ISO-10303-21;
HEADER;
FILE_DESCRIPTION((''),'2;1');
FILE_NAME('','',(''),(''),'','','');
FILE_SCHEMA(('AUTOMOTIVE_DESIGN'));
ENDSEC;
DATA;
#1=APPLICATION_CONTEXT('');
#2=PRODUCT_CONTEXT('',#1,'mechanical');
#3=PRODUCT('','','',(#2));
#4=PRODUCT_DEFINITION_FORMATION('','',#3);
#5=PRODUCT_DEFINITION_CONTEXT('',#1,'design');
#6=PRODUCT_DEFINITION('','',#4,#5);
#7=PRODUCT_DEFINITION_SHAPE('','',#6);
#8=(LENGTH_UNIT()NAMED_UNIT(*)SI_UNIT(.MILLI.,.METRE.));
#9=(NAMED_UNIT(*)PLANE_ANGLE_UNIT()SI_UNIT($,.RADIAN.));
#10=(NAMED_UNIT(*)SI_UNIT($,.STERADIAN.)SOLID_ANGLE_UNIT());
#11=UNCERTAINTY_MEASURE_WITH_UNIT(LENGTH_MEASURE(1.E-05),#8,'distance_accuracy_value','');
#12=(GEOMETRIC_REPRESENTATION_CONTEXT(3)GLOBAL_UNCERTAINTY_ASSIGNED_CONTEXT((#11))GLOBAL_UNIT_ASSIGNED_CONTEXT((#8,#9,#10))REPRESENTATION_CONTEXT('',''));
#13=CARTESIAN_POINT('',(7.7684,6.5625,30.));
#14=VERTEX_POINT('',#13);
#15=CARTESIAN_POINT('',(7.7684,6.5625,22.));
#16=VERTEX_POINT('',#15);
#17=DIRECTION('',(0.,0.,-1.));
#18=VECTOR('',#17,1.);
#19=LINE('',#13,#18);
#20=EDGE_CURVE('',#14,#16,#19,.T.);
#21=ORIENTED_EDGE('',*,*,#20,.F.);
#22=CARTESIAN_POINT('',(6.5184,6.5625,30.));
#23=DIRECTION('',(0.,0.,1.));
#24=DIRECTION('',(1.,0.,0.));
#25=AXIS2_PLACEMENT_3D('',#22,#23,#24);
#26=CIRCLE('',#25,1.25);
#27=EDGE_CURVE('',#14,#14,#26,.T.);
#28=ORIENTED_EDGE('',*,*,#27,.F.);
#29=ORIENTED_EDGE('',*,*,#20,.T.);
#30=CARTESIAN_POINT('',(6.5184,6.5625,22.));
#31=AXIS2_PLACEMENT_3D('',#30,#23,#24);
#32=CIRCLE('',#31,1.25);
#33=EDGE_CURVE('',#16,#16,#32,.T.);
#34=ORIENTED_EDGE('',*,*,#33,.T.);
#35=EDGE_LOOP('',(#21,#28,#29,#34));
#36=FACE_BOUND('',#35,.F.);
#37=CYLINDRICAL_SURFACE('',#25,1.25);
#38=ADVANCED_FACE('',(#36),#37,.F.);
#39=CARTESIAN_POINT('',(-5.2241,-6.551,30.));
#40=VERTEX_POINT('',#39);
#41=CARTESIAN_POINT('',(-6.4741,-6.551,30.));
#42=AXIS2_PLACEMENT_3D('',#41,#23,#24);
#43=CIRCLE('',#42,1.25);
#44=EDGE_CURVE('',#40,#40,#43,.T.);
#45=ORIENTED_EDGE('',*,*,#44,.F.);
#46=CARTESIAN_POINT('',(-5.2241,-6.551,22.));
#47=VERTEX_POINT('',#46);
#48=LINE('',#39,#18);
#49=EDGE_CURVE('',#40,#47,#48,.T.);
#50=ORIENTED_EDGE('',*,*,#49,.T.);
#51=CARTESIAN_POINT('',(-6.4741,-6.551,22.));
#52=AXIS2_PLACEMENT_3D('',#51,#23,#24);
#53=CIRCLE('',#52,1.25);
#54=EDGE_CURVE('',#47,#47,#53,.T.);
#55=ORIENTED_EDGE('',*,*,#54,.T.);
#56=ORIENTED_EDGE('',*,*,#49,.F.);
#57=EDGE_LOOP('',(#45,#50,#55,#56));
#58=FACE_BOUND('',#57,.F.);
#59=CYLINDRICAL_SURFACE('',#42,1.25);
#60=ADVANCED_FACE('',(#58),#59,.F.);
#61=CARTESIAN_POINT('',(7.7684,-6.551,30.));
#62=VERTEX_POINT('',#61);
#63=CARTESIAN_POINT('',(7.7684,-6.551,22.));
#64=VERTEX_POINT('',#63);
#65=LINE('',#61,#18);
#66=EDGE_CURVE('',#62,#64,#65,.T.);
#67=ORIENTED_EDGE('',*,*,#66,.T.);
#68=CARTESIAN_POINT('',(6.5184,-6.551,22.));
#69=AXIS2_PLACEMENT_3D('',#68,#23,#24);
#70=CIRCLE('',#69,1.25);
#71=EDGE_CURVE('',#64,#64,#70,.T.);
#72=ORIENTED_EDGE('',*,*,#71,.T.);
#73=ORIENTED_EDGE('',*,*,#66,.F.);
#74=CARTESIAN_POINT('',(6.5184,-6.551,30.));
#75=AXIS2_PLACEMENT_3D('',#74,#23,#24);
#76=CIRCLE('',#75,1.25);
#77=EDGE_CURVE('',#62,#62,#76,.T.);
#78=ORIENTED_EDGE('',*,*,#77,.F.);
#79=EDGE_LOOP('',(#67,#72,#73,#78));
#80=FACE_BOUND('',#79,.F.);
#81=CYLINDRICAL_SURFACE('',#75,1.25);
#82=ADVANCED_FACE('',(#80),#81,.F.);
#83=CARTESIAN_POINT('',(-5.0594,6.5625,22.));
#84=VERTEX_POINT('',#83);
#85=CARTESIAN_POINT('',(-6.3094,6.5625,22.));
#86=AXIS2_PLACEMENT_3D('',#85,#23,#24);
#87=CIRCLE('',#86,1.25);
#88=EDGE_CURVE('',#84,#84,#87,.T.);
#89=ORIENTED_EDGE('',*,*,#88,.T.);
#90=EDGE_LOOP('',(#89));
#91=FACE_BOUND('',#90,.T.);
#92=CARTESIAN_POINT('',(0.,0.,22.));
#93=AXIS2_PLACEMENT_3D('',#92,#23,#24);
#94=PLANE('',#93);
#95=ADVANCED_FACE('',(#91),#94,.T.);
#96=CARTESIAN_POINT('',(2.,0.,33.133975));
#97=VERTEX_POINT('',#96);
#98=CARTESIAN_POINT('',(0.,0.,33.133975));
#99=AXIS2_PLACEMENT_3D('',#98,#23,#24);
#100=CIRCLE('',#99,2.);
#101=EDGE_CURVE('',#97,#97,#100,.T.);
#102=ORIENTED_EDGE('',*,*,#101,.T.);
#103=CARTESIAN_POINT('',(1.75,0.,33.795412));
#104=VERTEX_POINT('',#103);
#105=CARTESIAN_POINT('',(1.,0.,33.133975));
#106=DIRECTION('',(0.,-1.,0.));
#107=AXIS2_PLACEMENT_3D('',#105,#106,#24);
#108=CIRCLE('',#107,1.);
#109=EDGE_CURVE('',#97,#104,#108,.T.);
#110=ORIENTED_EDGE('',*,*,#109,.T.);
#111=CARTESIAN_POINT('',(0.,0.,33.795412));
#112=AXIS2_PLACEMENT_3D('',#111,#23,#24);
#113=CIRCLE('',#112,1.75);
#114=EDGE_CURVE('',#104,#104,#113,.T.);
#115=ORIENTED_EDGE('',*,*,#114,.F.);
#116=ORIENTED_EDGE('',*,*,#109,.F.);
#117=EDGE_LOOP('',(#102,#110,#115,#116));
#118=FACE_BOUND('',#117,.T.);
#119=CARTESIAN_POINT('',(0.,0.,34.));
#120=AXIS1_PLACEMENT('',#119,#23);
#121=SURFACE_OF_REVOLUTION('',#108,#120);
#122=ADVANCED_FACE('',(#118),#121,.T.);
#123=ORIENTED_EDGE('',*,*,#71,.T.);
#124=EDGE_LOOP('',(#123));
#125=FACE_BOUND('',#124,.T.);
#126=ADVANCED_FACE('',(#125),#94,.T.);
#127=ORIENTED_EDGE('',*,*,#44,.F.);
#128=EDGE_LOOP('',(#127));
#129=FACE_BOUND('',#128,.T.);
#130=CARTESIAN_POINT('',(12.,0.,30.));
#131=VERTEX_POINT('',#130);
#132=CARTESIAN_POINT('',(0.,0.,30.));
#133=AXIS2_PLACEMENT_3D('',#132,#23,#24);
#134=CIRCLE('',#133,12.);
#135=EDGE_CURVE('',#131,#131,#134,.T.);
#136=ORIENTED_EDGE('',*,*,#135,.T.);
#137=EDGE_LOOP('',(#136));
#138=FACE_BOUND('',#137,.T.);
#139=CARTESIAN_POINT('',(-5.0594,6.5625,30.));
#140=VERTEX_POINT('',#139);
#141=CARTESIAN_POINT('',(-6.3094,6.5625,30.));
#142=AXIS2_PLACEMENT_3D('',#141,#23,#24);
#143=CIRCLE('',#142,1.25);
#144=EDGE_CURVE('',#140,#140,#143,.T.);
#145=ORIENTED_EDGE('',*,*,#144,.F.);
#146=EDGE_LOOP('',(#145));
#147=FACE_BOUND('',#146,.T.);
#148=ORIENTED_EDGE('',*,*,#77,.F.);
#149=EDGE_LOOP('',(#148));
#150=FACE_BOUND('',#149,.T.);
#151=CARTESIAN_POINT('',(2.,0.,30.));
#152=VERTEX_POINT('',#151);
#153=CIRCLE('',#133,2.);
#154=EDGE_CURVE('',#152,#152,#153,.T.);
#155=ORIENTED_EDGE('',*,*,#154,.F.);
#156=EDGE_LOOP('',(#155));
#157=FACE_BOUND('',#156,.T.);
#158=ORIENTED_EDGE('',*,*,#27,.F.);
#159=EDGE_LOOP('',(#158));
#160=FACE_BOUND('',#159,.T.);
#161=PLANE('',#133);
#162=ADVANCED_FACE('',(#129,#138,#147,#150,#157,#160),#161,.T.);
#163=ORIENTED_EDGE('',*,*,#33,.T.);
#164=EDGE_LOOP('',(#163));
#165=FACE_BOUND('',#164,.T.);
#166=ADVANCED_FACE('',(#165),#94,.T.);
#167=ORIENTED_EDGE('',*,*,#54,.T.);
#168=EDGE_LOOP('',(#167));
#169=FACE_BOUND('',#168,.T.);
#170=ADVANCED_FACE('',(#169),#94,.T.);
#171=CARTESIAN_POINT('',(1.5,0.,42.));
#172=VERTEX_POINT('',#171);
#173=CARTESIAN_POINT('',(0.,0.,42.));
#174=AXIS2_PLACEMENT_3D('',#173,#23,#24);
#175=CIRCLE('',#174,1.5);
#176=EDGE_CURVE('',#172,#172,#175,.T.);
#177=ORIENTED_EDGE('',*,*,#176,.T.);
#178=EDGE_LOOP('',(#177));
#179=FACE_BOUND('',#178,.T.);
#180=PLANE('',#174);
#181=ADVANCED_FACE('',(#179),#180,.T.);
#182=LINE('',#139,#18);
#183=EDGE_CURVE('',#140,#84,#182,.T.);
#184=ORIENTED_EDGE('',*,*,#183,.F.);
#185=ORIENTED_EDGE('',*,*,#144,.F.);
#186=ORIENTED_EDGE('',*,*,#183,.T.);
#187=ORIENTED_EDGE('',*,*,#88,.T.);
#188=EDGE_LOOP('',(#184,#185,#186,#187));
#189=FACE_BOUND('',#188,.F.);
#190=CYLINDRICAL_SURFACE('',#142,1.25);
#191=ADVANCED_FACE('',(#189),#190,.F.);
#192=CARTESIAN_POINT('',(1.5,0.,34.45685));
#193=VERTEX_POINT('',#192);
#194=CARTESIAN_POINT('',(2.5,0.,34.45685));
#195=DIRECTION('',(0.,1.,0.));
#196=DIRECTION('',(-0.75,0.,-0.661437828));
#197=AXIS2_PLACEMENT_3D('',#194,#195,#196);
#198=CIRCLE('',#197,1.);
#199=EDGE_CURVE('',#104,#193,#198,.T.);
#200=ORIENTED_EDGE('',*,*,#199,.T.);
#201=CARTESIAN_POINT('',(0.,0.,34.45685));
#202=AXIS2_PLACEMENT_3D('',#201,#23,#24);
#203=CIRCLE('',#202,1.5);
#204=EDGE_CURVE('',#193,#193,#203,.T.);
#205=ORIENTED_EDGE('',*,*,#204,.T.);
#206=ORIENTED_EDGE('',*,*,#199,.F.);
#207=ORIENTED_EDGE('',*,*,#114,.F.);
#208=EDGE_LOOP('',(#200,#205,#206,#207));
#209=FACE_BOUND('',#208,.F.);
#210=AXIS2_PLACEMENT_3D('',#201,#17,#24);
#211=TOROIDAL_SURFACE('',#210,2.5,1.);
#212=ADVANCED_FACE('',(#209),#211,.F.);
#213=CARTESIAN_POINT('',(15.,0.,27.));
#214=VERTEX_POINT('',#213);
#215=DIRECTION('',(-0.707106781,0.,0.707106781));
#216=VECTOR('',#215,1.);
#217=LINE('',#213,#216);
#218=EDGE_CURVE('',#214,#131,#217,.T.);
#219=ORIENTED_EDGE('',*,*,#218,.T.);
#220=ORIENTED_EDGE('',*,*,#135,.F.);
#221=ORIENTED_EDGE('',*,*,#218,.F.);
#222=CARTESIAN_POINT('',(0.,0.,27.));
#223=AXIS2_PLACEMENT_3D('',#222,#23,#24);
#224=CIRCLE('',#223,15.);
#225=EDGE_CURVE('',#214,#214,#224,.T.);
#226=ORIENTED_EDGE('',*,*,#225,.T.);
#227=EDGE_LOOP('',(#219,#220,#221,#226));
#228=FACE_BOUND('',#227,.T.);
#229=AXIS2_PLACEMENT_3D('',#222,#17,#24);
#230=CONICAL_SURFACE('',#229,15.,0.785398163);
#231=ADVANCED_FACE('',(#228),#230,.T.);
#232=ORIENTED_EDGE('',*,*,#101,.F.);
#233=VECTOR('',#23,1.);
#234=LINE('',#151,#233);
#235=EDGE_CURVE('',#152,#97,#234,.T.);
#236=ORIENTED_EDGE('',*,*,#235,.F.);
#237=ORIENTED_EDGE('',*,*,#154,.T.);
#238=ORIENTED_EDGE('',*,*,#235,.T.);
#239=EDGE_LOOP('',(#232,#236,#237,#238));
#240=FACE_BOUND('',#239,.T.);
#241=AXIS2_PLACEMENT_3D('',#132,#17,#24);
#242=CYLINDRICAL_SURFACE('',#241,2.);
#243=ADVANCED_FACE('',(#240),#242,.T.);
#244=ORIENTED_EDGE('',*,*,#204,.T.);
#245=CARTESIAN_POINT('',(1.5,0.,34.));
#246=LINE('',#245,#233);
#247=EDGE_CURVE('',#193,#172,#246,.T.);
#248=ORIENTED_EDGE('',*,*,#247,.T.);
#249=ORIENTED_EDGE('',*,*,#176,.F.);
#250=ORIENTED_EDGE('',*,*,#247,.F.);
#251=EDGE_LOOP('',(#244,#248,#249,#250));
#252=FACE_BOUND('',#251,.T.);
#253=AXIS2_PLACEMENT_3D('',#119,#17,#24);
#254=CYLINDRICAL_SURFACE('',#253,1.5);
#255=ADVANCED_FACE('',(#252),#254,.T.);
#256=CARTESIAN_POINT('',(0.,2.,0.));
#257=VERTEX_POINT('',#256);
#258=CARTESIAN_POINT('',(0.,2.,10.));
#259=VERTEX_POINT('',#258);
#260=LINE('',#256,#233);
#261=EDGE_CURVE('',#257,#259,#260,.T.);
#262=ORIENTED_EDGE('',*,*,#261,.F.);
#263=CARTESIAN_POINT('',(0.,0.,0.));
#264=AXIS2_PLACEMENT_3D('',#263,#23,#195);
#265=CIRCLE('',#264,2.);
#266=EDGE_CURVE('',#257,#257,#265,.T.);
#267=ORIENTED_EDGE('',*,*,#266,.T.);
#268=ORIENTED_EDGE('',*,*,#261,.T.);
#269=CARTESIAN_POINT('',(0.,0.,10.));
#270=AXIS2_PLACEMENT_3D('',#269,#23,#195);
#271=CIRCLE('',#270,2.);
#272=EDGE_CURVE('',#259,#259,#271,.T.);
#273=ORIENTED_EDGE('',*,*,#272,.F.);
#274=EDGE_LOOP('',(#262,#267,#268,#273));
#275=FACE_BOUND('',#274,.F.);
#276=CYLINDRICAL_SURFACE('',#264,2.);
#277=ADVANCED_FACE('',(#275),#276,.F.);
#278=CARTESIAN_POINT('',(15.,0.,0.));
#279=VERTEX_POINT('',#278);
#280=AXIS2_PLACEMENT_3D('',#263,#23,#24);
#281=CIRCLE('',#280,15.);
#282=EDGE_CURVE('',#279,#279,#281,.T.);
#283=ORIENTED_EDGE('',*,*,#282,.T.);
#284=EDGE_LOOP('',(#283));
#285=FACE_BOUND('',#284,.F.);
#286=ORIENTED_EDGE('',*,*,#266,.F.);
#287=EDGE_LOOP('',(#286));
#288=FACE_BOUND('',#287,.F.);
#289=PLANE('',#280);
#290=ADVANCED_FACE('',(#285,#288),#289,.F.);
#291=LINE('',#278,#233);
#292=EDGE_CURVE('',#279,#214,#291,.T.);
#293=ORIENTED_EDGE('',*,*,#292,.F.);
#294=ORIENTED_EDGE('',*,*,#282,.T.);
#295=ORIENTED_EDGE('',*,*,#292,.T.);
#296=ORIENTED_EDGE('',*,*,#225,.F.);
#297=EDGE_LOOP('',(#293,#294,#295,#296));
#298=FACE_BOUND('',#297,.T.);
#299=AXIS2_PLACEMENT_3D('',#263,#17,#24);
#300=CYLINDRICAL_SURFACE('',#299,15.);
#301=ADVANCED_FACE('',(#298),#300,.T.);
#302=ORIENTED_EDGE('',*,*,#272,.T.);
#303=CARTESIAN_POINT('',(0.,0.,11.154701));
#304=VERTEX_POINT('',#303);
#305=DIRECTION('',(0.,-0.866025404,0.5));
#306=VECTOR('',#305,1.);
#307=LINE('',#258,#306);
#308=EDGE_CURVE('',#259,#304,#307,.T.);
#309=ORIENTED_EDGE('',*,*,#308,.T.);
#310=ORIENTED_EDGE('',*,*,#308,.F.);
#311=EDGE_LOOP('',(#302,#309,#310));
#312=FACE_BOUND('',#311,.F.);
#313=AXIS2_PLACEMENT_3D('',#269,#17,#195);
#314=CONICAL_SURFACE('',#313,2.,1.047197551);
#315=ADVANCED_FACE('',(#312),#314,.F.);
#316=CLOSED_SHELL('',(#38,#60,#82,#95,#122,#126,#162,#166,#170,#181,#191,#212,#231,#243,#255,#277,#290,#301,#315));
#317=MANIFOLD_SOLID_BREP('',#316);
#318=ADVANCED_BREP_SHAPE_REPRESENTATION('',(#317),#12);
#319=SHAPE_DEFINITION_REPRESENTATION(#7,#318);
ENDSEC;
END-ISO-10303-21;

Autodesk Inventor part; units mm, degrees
ref_plane "YZ Plane" through (0, 0, 0) normal (1, 0, 0) x (0, 1, 0)
ref_plane "XZ Plane" through (0, 0, 0) normal (0, 1, 0) x (-1, 0, 0)
ref_plane "XY Plane" through (0, 0, 0) normal (0, 0, 1) x (1, 0, 0)
sketch "Sketch1" plane through (0, 0, 0) normal (0, 0, 1) x (1, 0, 0)
  circle A0 centre (0, 0) radius 15
extrude "Extrusion1" add sketch "Sketch1" along normal blind 30
chamfer "Chamfer1" distance 3 angle 45 1 edges at (-15, 0, 30)
sketch "Sketch2" plane through (0, 0, 30) normal (0, 0, 1) x (1, 0, 0)
  circle A0 centre (0, 0) radius 2
extrude "Extrusion2" add sketch "Sketch2" along normal blind 4
sketch "Sketch3" plane through (0, 0, 34) normal (0, 0, 1) x (1, 0, 0)
  circle A0 centre (0, 0) radius 1.5
extrude "Extrusion3" add sketch "Sketch3" along normal blind 8
fillet "Fillet1" radius 1 2 edges at (-2, 0, 34) (-1.5, 0, 34)
sketch "Sketch4" plane through (0, 0, 30) normal (0, 0, 1) x (1, 0, 0)
  point P0 (0, 0)
sketch "Sketch5" plane through (0, 0, 30) normal (0, 0, 1) x (1, 0, 0)
  circle A0 centre (0, 0) radius 12 projected
  circle A1 centre (6.5184, -6.551) radius 1.25
  circle A2 centre (-6.3094, 6.5625) radius 1.25
  circle A3 centre (6.5184, 6.5625) radius 1.25
  circle A4 centre (-6.4741, -6.551) radius 1.25
extrude "Extrusion4" cut sketch "Sketch5" against normal blind 8 contours A1 | A2 | A3 | A4
sketch "Sketch6" plane through (0, 0, 0) normal (0, 0, -1) x (-1, 0, 0)
  point P0 (0, 0)
hole "Hole1" at (0, 0, 0) direction (0, 0, 1) diameter 4 depth 10 tip angle 120
properties part number "DCMotorv2"
